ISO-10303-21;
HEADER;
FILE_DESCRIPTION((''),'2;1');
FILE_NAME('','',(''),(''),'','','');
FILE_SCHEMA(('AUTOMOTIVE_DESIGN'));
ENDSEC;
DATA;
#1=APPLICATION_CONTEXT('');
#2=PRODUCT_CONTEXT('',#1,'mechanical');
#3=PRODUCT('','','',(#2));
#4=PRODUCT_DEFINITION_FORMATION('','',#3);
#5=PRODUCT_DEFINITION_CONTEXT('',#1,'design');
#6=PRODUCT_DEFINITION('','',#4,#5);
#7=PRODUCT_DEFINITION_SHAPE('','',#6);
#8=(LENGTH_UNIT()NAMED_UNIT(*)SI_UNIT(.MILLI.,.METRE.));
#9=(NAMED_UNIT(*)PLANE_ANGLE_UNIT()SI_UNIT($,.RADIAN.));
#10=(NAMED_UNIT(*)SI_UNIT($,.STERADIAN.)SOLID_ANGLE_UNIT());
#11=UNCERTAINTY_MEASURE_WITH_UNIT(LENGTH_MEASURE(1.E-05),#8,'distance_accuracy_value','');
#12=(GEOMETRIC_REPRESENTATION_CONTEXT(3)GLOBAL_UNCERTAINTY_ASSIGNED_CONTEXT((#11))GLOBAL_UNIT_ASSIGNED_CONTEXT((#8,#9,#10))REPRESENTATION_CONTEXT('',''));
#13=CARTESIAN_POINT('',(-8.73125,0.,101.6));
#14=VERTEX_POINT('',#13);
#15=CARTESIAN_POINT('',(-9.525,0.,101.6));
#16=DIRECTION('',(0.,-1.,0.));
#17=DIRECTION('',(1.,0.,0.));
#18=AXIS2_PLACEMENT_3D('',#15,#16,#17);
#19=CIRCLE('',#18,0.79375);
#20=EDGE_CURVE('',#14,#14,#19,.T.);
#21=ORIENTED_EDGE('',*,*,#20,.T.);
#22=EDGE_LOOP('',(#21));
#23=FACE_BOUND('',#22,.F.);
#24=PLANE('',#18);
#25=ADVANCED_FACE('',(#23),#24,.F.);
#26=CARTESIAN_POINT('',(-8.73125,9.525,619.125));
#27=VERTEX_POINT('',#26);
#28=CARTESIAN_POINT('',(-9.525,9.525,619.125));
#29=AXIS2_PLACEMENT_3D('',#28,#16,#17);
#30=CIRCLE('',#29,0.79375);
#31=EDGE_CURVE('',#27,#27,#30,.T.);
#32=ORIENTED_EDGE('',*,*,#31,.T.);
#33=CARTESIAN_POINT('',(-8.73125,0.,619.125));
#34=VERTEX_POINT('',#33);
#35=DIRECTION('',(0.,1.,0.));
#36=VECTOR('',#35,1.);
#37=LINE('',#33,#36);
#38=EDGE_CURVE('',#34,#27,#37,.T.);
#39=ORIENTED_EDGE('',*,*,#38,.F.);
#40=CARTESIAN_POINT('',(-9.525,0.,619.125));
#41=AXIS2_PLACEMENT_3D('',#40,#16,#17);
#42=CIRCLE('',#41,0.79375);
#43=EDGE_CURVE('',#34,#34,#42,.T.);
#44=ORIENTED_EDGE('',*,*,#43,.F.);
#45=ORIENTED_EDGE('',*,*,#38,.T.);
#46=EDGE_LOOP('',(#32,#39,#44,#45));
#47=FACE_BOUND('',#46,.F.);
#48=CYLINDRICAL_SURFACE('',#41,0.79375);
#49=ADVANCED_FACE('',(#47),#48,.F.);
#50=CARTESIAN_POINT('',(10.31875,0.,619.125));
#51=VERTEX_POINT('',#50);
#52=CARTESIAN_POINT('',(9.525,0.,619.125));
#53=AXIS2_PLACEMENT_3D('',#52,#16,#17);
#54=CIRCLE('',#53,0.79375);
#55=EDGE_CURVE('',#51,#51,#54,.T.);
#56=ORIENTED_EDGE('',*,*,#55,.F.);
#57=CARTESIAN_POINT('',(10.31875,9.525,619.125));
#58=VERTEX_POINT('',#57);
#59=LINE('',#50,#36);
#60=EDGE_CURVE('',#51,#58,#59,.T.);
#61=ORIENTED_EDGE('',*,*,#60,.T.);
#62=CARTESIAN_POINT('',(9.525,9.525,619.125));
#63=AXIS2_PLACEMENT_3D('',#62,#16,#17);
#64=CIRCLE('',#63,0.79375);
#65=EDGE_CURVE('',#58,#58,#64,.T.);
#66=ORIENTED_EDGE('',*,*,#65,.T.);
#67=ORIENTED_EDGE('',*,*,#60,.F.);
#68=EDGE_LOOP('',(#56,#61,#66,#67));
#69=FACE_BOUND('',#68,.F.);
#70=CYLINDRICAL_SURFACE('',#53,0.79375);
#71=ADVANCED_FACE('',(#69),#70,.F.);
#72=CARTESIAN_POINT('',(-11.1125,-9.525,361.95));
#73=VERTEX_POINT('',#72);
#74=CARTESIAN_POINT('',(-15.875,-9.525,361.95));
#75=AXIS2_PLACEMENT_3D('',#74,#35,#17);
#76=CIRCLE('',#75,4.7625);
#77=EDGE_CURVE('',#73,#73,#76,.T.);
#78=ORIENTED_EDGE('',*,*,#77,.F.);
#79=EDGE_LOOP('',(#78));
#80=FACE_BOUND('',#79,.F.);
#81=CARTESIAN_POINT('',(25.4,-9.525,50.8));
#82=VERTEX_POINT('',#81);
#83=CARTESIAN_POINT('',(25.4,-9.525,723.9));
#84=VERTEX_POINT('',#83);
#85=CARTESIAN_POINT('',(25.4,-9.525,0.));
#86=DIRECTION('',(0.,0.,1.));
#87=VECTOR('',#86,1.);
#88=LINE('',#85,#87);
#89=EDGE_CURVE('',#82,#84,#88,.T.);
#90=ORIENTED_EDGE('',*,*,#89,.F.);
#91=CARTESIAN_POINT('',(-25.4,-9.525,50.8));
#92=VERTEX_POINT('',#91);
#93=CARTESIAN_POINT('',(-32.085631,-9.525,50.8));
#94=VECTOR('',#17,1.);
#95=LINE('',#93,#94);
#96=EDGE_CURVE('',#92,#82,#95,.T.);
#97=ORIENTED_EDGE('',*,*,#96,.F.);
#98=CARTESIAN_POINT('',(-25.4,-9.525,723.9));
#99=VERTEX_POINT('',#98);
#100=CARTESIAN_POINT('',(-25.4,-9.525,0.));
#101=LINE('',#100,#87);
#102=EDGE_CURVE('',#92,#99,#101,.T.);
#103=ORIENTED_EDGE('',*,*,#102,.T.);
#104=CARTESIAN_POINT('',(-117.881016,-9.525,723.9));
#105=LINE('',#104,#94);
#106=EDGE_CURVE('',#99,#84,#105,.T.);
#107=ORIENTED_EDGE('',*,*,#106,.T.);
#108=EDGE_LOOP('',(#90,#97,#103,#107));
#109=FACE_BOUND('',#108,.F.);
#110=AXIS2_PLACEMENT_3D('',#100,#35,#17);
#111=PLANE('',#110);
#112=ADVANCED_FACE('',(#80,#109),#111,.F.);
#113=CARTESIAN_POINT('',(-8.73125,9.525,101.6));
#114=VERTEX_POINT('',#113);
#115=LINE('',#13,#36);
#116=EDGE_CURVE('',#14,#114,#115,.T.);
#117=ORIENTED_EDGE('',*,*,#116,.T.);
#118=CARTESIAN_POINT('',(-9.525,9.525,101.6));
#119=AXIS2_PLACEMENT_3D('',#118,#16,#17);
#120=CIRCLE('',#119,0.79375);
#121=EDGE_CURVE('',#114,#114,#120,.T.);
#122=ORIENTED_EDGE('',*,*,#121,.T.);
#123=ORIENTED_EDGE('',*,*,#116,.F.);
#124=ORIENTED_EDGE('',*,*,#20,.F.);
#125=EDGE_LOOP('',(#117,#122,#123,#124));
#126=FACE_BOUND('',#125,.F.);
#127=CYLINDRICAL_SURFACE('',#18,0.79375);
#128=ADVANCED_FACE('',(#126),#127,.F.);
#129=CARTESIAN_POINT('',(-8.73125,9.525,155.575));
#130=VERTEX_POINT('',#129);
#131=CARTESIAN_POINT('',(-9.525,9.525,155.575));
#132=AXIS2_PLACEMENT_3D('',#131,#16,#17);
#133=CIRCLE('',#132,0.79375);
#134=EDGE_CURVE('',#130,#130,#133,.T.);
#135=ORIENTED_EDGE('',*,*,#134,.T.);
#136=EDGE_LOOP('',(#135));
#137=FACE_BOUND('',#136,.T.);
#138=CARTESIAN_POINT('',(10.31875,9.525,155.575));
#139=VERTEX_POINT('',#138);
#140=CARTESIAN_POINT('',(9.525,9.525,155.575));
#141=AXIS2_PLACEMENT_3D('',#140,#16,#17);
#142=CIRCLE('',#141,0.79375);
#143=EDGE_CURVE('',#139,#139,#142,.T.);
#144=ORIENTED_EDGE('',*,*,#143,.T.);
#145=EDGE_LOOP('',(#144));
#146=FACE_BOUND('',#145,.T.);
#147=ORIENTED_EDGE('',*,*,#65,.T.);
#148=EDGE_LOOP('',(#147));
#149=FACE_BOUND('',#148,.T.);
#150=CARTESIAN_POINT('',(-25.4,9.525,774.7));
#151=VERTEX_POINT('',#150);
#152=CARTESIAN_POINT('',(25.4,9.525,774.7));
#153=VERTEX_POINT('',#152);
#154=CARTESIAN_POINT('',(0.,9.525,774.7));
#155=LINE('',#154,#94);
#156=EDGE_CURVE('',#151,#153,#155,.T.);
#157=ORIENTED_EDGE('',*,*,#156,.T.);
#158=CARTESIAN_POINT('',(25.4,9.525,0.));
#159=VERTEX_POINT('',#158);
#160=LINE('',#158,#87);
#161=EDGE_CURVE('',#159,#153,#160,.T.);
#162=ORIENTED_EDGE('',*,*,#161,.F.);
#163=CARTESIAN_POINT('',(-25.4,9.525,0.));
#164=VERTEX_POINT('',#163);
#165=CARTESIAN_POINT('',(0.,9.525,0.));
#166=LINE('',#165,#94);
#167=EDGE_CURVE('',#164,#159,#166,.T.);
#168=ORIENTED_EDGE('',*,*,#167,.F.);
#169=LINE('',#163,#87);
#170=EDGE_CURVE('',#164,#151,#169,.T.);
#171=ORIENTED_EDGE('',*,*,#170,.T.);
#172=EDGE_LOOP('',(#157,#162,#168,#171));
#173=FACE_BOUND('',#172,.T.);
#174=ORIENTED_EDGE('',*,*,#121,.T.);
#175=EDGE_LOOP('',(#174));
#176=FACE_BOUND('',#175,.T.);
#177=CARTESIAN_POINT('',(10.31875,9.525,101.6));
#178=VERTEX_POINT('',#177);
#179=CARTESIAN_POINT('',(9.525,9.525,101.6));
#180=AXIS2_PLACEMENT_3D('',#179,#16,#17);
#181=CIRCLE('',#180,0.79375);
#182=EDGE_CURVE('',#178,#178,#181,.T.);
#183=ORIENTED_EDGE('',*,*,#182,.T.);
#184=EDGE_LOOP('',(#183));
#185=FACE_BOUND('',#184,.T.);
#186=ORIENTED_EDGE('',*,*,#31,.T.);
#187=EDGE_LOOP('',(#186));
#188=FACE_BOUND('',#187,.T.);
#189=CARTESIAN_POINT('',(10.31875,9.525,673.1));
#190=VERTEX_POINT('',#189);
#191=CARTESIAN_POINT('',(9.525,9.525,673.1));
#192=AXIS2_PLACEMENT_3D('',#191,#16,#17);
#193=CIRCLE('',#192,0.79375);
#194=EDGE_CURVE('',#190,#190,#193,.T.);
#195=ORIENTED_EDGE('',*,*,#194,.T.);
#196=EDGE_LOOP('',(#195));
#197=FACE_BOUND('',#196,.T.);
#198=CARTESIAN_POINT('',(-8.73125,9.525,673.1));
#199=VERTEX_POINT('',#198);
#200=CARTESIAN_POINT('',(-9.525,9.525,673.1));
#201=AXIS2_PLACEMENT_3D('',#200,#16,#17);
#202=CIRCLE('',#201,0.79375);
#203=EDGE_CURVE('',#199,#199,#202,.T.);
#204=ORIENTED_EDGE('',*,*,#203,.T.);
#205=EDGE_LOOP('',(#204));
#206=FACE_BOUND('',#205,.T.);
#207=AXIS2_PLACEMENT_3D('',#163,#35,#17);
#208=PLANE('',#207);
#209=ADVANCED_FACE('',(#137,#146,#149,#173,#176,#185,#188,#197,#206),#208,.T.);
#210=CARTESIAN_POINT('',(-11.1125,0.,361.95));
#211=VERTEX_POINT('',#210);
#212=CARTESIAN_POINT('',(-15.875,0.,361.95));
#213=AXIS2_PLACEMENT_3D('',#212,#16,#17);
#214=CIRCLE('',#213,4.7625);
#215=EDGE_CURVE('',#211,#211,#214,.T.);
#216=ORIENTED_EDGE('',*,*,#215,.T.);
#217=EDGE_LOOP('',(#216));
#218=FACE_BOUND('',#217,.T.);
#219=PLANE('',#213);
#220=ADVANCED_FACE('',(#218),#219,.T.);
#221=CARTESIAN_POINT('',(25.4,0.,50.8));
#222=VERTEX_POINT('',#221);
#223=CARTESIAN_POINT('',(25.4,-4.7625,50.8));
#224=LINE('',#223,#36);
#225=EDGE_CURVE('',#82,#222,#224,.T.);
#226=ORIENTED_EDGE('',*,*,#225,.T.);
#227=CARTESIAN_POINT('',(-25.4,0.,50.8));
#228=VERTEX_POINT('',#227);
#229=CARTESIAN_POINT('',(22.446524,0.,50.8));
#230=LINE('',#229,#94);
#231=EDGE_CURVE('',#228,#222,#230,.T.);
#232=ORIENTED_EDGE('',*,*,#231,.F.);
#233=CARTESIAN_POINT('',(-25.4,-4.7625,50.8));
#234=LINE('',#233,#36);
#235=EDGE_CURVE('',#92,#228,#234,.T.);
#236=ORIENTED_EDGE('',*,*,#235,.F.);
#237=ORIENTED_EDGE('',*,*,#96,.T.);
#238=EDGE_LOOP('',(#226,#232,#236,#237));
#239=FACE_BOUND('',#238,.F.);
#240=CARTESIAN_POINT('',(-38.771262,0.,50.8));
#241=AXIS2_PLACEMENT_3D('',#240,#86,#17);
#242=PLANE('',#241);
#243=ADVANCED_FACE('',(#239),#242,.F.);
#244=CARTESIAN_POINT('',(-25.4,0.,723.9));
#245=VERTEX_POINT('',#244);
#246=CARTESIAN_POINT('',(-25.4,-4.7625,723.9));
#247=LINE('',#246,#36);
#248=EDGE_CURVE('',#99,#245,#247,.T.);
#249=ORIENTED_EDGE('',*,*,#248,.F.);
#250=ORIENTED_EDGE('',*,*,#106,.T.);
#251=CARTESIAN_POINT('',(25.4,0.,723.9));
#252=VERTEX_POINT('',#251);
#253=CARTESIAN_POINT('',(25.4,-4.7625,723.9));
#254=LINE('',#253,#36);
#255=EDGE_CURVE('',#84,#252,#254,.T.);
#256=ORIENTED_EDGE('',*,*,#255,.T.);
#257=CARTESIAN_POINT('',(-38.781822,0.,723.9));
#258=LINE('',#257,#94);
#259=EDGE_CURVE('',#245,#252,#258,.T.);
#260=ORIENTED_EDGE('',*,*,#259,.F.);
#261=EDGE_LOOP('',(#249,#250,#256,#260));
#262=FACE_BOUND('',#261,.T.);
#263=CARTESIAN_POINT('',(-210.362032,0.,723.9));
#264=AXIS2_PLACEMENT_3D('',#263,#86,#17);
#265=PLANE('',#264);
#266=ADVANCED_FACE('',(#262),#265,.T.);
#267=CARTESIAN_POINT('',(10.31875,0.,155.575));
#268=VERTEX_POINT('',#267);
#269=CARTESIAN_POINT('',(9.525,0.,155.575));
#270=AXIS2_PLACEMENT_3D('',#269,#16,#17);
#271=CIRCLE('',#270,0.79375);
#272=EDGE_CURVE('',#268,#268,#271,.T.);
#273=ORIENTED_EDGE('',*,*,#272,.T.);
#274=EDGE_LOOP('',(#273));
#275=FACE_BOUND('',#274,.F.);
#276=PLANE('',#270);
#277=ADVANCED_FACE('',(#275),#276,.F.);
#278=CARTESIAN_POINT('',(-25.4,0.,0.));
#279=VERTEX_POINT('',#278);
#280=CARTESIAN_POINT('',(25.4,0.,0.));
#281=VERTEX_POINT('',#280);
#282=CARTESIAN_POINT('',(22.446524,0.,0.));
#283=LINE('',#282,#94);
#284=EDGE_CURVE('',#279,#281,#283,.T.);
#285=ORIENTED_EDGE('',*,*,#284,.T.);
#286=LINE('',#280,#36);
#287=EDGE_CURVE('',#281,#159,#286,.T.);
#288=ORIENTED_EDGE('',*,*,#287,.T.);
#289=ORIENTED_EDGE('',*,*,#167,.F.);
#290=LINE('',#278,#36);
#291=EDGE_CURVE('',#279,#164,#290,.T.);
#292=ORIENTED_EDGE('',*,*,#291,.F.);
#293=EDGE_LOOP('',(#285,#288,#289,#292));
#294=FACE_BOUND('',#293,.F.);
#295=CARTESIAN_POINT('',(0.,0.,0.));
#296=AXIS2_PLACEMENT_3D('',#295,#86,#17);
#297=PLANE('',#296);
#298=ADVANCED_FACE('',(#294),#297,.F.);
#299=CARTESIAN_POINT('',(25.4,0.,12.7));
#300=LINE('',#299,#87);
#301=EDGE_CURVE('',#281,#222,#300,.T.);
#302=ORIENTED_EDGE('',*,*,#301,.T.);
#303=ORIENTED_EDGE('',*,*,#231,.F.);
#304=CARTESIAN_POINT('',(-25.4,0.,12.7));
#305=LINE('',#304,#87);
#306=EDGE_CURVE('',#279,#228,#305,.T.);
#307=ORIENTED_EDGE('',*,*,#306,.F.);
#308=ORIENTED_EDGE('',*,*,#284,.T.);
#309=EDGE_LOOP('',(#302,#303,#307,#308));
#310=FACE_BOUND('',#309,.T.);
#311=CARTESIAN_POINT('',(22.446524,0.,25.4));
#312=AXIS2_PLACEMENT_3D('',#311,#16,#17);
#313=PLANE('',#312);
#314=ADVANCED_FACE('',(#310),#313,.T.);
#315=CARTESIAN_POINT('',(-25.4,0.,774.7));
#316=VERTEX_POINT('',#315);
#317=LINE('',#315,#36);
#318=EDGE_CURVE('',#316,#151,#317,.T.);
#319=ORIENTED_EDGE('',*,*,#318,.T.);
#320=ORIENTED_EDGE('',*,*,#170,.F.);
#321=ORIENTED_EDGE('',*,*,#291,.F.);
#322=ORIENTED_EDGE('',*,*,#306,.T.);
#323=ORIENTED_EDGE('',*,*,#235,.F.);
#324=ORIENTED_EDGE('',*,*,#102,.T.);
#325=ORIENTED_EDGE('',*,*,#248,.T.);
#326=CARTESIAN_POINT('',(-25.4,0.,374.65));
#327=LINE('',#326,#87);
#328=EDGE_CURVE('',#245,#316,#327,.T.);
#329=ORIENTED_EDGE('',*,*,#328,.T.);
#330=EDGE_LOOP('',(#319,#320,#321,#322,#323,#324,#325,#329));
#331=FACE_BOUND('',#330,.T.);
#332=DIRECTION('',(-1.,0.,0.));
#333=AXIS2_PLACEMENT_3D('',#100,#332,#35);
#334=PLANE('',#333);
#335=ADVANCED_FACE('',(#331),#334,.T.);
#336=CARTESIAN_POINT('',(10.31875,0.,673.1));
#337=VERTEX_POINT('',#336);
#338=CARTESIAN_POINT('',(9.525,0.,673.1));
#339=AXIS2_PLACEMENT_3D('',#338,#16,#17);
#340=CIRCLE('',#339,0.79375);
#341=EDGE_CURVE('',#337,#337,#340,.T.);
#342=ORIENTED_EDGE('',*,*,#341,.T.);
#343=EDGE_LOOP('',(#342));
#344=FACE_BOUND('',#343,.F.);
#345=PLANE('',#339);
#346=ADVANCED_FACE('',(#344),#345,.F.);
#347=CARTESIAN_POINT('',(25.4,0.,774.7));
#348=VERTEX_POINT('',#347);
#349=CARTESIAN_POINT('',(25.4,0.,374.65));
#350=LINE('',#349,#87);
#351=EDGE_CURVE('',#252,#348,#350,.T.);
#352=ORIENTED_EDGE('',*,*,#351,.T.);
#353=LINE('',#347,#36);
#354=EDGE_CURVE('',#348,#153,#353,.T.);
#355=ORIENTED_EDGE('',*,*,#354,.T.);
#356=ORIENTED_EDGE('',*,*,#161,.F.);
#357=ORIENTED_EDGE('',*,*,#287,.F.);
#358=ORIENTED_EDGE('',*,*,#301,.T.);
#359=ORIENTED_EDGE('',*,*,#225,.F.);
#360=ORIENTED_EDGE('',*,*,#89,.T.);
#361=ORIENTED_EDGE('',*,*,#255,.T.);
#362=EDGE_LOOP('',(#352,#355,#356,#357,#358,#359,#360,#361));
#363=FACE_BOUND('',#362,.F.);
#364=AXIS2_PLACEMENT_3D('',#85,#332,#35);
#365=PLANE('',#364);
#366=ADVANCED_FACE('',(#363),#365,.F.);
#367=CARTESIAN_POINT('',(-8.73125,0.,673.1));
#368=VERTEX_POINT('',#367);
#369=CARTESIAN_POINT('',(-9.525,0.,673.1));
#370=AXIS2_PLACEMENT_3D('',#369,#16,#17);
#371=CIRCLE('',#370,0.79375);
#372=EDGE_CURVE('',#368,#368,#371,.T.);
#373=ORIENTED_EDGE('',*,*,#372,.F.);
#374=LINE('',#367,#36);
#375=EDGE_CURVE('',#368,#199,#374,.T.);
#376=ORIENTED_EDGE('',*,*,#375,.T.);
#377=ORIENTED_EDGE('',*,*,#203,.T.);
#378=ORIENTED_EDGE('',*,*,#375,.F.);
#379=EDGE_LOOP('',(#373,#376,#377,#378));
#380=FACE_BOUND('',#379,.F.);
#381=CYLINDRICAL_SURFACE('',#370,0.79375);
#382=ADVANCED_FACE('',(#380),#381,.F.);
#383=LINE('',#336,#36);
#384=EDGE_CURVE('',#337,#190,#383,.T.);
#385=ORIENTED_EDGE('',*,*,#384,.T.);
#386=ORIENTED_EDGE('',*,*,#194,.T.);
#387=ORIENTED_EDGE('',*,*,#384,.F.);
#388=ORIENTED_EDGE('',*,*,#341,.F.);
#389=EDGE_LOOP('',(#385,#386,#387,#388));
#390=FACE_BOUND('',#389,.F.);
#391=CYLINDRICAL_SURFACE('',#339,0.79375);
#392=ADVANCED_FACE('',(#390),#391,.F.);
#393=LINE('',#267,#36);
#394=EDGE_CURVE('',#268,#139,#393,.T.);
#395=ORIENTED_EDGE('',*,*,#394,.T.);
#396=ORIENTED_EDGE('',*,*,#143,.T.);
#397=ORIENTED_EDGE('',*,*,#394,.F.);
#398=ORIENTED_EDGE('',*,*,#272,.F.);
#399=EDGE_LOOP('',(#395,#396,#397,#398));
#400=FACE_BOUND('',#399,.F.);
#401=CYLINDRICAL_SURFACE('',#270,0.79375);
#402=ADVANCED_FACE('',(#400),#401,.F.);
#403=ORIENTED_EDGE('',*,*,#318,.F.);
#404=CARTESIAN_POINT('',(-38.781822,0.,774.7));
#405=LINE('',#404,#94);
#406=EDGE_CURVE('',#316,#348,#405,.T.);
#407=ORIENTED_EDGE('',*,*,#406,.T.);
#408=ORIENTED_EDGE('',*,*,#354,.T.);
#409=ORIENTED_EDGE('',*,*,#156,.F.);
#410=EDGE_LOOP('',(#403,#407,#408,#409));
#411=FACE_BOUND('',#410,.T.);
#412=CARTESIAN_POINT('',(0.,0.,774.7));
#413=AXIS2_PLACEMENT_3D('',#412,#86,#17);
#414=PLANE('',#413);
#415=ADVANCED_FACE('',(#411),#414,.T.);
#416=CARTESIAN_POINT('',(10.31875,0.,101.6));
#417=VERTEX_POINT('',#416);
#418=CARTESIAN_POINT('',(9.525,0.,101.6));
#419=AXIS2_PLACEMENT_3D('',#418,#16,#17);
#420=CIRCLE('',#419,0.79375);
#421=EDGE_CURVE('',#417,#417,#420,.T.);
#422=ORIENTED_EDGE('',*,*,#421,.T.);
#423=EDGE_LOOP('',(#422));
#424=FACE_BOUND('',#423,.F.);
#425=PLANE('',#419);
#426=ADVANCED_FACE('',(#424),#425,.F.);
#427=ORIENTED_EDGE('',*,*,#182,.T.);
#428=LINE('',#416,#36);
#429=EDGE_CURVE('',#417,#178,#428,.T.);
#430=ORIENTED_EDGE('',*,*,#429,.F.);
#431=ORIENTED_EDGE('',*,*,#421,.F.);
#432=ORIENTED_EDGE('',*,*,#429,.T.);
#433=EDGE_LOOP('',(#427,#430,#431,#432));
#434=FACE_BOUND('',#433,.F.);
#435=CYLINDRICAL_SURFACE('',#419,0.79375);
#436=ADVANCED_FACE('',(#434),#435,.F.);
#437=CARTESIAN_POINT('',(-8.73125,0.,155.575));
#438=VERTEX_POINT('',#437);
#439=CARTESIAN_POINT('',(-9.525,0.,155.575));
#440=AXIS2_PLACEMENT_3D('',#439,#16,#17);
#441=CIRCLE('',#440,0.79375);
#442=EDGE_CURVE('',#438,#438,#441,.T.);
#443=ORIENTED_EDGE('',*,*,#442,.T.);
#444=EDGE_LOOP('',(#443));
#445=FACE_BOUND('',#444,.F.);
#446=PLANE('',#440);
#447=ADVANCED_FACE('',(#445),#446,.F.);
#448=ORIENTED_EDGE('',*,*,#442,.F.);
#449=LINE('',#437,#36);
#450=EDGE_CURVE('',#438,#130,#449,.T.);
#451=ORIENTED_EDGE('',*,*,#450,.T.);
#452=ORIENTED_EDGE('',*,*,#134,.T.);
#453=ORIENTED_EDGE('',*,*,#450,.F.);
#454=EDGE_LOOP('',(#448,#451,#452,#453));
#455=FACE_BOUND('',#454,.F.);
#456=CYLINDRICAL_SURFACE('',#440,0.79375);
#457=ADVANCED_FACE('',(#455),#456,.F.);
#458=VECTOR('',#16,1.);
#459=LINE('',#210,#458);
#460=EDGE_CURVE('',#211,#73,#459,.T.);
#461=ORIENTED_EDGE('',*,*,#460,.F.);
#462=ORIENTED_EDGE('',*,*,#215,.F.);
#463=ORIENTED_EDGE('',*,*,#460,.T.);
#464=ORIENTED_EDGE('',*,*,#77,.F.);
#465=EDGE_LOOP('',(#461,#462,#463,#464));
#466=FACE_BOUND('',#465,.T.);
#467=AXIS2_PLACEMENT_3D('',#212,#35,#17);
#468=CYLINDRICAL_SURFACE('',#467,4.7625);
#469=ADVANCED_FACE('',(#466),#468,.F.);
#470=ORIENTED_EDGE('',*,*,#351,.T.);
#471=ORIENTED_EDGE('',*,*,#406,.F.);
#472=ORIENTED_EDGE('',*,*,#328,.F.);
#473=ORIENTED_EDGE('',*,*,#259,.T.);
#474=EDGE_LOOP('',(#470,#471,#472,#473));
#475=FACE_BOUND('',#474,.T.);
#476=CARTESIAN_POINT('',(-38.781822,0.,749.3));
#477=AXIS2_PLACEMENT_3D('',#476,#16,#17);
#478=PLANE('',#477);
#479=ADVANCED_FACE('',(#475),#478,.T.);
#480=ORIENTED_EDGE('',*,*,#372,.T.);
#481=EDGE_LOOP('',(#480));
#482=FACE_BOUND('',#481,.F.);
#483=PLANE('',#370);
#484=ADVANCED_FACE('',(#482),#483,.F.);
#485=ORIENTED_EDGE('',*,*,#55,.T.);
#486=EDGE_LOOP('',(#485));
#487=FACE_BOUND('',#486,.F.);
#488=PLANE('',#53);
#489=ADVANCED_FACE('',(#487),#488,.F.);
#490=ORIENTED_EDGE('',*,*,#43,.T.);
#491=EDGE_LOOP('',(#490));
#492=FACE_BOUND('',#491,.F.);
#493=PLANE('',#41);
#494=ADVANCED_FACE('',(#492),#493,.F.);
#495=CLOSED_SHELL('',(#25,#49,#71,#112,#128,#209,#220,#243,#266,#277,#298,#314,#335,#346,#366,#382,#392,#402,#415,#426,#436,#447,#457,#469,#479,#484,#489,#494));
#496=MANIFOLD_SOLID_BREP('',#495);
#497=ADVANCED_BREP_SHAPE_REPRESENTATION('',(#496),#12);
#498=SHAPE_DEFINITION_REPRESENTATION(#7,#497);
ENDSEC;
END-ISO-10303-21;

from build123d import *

# Parameters (mm, degrees)
F0_W     = 50.8
F0_H     = 19.05
F1_DEPTH = 774.7
F2_W     = 122.43557321
F2_H     = 50.8
F2_W_2   = 343.1604206562
F3_DEPTH = 25.4
F4_R     = 0.79375
F5_DEPTH = 25.4
F6_R     = 4.7625
F7_DEPTH = 25.4


# Not quite as in the source:
# - a feature names something its author has since deleted; it is built from what else it names


with BuildPart() as f1:
    # F0 (on Top) → F1 (new body)
    with BuildSketch(Plane.XY):
        Rectangle(F0_W, F0_H)
    extrude(amount=F1_DEPTH)

    # F2 (on Front) → F3 (cut)
    with BuildSketch(Plane.XZ):
        with Locations((22.4465244144, 25.4)):
            Rectangle(F2_W, F2_H)
        with Locations((-38.7818217278, 749.3)):
            Rectangle(F2_W_2, F2_H)
    extrude(amount=F3_DEPTH, mode=Mode.SUBTRACT)

    # F4 (on Front) → F5 (cut)
    with BuildSketch(Plane.XZ):
        with Locations((9.525, 101.6)):
            Circle(F4_R)
        with Locations((9.525, 155.575)):
            Circle(F4_R)
        with Locations((9.525, 619.125)):
            Circle(F4_R)
        with Locations((9.525, 673.1)):
            Circle(F4_R)
        with Locations((-9.525, 619.125)):
            Circle(F4_R)
        with Locations((-9.525, 673.1)):
            Circle(F4_R)
        with Locations((-9.525, 101.6)):
            Circle(F4_R)
        with Locations((-9.525, 155.575)):
            Circle(F4_R)
    extrude(amount=-F5_DEPTH, mode=Mode.SUBTRACT)

    # F6 (on Front) → F7 (cut)
    with BuildSketch(Plane.XZ):
        with Locations((-15.875, 361.95)):
            Circle(F6_R)
    extrude(amount=F7_DEPTH, mode=Mode.SUBTRACT)


solid = f1.part
